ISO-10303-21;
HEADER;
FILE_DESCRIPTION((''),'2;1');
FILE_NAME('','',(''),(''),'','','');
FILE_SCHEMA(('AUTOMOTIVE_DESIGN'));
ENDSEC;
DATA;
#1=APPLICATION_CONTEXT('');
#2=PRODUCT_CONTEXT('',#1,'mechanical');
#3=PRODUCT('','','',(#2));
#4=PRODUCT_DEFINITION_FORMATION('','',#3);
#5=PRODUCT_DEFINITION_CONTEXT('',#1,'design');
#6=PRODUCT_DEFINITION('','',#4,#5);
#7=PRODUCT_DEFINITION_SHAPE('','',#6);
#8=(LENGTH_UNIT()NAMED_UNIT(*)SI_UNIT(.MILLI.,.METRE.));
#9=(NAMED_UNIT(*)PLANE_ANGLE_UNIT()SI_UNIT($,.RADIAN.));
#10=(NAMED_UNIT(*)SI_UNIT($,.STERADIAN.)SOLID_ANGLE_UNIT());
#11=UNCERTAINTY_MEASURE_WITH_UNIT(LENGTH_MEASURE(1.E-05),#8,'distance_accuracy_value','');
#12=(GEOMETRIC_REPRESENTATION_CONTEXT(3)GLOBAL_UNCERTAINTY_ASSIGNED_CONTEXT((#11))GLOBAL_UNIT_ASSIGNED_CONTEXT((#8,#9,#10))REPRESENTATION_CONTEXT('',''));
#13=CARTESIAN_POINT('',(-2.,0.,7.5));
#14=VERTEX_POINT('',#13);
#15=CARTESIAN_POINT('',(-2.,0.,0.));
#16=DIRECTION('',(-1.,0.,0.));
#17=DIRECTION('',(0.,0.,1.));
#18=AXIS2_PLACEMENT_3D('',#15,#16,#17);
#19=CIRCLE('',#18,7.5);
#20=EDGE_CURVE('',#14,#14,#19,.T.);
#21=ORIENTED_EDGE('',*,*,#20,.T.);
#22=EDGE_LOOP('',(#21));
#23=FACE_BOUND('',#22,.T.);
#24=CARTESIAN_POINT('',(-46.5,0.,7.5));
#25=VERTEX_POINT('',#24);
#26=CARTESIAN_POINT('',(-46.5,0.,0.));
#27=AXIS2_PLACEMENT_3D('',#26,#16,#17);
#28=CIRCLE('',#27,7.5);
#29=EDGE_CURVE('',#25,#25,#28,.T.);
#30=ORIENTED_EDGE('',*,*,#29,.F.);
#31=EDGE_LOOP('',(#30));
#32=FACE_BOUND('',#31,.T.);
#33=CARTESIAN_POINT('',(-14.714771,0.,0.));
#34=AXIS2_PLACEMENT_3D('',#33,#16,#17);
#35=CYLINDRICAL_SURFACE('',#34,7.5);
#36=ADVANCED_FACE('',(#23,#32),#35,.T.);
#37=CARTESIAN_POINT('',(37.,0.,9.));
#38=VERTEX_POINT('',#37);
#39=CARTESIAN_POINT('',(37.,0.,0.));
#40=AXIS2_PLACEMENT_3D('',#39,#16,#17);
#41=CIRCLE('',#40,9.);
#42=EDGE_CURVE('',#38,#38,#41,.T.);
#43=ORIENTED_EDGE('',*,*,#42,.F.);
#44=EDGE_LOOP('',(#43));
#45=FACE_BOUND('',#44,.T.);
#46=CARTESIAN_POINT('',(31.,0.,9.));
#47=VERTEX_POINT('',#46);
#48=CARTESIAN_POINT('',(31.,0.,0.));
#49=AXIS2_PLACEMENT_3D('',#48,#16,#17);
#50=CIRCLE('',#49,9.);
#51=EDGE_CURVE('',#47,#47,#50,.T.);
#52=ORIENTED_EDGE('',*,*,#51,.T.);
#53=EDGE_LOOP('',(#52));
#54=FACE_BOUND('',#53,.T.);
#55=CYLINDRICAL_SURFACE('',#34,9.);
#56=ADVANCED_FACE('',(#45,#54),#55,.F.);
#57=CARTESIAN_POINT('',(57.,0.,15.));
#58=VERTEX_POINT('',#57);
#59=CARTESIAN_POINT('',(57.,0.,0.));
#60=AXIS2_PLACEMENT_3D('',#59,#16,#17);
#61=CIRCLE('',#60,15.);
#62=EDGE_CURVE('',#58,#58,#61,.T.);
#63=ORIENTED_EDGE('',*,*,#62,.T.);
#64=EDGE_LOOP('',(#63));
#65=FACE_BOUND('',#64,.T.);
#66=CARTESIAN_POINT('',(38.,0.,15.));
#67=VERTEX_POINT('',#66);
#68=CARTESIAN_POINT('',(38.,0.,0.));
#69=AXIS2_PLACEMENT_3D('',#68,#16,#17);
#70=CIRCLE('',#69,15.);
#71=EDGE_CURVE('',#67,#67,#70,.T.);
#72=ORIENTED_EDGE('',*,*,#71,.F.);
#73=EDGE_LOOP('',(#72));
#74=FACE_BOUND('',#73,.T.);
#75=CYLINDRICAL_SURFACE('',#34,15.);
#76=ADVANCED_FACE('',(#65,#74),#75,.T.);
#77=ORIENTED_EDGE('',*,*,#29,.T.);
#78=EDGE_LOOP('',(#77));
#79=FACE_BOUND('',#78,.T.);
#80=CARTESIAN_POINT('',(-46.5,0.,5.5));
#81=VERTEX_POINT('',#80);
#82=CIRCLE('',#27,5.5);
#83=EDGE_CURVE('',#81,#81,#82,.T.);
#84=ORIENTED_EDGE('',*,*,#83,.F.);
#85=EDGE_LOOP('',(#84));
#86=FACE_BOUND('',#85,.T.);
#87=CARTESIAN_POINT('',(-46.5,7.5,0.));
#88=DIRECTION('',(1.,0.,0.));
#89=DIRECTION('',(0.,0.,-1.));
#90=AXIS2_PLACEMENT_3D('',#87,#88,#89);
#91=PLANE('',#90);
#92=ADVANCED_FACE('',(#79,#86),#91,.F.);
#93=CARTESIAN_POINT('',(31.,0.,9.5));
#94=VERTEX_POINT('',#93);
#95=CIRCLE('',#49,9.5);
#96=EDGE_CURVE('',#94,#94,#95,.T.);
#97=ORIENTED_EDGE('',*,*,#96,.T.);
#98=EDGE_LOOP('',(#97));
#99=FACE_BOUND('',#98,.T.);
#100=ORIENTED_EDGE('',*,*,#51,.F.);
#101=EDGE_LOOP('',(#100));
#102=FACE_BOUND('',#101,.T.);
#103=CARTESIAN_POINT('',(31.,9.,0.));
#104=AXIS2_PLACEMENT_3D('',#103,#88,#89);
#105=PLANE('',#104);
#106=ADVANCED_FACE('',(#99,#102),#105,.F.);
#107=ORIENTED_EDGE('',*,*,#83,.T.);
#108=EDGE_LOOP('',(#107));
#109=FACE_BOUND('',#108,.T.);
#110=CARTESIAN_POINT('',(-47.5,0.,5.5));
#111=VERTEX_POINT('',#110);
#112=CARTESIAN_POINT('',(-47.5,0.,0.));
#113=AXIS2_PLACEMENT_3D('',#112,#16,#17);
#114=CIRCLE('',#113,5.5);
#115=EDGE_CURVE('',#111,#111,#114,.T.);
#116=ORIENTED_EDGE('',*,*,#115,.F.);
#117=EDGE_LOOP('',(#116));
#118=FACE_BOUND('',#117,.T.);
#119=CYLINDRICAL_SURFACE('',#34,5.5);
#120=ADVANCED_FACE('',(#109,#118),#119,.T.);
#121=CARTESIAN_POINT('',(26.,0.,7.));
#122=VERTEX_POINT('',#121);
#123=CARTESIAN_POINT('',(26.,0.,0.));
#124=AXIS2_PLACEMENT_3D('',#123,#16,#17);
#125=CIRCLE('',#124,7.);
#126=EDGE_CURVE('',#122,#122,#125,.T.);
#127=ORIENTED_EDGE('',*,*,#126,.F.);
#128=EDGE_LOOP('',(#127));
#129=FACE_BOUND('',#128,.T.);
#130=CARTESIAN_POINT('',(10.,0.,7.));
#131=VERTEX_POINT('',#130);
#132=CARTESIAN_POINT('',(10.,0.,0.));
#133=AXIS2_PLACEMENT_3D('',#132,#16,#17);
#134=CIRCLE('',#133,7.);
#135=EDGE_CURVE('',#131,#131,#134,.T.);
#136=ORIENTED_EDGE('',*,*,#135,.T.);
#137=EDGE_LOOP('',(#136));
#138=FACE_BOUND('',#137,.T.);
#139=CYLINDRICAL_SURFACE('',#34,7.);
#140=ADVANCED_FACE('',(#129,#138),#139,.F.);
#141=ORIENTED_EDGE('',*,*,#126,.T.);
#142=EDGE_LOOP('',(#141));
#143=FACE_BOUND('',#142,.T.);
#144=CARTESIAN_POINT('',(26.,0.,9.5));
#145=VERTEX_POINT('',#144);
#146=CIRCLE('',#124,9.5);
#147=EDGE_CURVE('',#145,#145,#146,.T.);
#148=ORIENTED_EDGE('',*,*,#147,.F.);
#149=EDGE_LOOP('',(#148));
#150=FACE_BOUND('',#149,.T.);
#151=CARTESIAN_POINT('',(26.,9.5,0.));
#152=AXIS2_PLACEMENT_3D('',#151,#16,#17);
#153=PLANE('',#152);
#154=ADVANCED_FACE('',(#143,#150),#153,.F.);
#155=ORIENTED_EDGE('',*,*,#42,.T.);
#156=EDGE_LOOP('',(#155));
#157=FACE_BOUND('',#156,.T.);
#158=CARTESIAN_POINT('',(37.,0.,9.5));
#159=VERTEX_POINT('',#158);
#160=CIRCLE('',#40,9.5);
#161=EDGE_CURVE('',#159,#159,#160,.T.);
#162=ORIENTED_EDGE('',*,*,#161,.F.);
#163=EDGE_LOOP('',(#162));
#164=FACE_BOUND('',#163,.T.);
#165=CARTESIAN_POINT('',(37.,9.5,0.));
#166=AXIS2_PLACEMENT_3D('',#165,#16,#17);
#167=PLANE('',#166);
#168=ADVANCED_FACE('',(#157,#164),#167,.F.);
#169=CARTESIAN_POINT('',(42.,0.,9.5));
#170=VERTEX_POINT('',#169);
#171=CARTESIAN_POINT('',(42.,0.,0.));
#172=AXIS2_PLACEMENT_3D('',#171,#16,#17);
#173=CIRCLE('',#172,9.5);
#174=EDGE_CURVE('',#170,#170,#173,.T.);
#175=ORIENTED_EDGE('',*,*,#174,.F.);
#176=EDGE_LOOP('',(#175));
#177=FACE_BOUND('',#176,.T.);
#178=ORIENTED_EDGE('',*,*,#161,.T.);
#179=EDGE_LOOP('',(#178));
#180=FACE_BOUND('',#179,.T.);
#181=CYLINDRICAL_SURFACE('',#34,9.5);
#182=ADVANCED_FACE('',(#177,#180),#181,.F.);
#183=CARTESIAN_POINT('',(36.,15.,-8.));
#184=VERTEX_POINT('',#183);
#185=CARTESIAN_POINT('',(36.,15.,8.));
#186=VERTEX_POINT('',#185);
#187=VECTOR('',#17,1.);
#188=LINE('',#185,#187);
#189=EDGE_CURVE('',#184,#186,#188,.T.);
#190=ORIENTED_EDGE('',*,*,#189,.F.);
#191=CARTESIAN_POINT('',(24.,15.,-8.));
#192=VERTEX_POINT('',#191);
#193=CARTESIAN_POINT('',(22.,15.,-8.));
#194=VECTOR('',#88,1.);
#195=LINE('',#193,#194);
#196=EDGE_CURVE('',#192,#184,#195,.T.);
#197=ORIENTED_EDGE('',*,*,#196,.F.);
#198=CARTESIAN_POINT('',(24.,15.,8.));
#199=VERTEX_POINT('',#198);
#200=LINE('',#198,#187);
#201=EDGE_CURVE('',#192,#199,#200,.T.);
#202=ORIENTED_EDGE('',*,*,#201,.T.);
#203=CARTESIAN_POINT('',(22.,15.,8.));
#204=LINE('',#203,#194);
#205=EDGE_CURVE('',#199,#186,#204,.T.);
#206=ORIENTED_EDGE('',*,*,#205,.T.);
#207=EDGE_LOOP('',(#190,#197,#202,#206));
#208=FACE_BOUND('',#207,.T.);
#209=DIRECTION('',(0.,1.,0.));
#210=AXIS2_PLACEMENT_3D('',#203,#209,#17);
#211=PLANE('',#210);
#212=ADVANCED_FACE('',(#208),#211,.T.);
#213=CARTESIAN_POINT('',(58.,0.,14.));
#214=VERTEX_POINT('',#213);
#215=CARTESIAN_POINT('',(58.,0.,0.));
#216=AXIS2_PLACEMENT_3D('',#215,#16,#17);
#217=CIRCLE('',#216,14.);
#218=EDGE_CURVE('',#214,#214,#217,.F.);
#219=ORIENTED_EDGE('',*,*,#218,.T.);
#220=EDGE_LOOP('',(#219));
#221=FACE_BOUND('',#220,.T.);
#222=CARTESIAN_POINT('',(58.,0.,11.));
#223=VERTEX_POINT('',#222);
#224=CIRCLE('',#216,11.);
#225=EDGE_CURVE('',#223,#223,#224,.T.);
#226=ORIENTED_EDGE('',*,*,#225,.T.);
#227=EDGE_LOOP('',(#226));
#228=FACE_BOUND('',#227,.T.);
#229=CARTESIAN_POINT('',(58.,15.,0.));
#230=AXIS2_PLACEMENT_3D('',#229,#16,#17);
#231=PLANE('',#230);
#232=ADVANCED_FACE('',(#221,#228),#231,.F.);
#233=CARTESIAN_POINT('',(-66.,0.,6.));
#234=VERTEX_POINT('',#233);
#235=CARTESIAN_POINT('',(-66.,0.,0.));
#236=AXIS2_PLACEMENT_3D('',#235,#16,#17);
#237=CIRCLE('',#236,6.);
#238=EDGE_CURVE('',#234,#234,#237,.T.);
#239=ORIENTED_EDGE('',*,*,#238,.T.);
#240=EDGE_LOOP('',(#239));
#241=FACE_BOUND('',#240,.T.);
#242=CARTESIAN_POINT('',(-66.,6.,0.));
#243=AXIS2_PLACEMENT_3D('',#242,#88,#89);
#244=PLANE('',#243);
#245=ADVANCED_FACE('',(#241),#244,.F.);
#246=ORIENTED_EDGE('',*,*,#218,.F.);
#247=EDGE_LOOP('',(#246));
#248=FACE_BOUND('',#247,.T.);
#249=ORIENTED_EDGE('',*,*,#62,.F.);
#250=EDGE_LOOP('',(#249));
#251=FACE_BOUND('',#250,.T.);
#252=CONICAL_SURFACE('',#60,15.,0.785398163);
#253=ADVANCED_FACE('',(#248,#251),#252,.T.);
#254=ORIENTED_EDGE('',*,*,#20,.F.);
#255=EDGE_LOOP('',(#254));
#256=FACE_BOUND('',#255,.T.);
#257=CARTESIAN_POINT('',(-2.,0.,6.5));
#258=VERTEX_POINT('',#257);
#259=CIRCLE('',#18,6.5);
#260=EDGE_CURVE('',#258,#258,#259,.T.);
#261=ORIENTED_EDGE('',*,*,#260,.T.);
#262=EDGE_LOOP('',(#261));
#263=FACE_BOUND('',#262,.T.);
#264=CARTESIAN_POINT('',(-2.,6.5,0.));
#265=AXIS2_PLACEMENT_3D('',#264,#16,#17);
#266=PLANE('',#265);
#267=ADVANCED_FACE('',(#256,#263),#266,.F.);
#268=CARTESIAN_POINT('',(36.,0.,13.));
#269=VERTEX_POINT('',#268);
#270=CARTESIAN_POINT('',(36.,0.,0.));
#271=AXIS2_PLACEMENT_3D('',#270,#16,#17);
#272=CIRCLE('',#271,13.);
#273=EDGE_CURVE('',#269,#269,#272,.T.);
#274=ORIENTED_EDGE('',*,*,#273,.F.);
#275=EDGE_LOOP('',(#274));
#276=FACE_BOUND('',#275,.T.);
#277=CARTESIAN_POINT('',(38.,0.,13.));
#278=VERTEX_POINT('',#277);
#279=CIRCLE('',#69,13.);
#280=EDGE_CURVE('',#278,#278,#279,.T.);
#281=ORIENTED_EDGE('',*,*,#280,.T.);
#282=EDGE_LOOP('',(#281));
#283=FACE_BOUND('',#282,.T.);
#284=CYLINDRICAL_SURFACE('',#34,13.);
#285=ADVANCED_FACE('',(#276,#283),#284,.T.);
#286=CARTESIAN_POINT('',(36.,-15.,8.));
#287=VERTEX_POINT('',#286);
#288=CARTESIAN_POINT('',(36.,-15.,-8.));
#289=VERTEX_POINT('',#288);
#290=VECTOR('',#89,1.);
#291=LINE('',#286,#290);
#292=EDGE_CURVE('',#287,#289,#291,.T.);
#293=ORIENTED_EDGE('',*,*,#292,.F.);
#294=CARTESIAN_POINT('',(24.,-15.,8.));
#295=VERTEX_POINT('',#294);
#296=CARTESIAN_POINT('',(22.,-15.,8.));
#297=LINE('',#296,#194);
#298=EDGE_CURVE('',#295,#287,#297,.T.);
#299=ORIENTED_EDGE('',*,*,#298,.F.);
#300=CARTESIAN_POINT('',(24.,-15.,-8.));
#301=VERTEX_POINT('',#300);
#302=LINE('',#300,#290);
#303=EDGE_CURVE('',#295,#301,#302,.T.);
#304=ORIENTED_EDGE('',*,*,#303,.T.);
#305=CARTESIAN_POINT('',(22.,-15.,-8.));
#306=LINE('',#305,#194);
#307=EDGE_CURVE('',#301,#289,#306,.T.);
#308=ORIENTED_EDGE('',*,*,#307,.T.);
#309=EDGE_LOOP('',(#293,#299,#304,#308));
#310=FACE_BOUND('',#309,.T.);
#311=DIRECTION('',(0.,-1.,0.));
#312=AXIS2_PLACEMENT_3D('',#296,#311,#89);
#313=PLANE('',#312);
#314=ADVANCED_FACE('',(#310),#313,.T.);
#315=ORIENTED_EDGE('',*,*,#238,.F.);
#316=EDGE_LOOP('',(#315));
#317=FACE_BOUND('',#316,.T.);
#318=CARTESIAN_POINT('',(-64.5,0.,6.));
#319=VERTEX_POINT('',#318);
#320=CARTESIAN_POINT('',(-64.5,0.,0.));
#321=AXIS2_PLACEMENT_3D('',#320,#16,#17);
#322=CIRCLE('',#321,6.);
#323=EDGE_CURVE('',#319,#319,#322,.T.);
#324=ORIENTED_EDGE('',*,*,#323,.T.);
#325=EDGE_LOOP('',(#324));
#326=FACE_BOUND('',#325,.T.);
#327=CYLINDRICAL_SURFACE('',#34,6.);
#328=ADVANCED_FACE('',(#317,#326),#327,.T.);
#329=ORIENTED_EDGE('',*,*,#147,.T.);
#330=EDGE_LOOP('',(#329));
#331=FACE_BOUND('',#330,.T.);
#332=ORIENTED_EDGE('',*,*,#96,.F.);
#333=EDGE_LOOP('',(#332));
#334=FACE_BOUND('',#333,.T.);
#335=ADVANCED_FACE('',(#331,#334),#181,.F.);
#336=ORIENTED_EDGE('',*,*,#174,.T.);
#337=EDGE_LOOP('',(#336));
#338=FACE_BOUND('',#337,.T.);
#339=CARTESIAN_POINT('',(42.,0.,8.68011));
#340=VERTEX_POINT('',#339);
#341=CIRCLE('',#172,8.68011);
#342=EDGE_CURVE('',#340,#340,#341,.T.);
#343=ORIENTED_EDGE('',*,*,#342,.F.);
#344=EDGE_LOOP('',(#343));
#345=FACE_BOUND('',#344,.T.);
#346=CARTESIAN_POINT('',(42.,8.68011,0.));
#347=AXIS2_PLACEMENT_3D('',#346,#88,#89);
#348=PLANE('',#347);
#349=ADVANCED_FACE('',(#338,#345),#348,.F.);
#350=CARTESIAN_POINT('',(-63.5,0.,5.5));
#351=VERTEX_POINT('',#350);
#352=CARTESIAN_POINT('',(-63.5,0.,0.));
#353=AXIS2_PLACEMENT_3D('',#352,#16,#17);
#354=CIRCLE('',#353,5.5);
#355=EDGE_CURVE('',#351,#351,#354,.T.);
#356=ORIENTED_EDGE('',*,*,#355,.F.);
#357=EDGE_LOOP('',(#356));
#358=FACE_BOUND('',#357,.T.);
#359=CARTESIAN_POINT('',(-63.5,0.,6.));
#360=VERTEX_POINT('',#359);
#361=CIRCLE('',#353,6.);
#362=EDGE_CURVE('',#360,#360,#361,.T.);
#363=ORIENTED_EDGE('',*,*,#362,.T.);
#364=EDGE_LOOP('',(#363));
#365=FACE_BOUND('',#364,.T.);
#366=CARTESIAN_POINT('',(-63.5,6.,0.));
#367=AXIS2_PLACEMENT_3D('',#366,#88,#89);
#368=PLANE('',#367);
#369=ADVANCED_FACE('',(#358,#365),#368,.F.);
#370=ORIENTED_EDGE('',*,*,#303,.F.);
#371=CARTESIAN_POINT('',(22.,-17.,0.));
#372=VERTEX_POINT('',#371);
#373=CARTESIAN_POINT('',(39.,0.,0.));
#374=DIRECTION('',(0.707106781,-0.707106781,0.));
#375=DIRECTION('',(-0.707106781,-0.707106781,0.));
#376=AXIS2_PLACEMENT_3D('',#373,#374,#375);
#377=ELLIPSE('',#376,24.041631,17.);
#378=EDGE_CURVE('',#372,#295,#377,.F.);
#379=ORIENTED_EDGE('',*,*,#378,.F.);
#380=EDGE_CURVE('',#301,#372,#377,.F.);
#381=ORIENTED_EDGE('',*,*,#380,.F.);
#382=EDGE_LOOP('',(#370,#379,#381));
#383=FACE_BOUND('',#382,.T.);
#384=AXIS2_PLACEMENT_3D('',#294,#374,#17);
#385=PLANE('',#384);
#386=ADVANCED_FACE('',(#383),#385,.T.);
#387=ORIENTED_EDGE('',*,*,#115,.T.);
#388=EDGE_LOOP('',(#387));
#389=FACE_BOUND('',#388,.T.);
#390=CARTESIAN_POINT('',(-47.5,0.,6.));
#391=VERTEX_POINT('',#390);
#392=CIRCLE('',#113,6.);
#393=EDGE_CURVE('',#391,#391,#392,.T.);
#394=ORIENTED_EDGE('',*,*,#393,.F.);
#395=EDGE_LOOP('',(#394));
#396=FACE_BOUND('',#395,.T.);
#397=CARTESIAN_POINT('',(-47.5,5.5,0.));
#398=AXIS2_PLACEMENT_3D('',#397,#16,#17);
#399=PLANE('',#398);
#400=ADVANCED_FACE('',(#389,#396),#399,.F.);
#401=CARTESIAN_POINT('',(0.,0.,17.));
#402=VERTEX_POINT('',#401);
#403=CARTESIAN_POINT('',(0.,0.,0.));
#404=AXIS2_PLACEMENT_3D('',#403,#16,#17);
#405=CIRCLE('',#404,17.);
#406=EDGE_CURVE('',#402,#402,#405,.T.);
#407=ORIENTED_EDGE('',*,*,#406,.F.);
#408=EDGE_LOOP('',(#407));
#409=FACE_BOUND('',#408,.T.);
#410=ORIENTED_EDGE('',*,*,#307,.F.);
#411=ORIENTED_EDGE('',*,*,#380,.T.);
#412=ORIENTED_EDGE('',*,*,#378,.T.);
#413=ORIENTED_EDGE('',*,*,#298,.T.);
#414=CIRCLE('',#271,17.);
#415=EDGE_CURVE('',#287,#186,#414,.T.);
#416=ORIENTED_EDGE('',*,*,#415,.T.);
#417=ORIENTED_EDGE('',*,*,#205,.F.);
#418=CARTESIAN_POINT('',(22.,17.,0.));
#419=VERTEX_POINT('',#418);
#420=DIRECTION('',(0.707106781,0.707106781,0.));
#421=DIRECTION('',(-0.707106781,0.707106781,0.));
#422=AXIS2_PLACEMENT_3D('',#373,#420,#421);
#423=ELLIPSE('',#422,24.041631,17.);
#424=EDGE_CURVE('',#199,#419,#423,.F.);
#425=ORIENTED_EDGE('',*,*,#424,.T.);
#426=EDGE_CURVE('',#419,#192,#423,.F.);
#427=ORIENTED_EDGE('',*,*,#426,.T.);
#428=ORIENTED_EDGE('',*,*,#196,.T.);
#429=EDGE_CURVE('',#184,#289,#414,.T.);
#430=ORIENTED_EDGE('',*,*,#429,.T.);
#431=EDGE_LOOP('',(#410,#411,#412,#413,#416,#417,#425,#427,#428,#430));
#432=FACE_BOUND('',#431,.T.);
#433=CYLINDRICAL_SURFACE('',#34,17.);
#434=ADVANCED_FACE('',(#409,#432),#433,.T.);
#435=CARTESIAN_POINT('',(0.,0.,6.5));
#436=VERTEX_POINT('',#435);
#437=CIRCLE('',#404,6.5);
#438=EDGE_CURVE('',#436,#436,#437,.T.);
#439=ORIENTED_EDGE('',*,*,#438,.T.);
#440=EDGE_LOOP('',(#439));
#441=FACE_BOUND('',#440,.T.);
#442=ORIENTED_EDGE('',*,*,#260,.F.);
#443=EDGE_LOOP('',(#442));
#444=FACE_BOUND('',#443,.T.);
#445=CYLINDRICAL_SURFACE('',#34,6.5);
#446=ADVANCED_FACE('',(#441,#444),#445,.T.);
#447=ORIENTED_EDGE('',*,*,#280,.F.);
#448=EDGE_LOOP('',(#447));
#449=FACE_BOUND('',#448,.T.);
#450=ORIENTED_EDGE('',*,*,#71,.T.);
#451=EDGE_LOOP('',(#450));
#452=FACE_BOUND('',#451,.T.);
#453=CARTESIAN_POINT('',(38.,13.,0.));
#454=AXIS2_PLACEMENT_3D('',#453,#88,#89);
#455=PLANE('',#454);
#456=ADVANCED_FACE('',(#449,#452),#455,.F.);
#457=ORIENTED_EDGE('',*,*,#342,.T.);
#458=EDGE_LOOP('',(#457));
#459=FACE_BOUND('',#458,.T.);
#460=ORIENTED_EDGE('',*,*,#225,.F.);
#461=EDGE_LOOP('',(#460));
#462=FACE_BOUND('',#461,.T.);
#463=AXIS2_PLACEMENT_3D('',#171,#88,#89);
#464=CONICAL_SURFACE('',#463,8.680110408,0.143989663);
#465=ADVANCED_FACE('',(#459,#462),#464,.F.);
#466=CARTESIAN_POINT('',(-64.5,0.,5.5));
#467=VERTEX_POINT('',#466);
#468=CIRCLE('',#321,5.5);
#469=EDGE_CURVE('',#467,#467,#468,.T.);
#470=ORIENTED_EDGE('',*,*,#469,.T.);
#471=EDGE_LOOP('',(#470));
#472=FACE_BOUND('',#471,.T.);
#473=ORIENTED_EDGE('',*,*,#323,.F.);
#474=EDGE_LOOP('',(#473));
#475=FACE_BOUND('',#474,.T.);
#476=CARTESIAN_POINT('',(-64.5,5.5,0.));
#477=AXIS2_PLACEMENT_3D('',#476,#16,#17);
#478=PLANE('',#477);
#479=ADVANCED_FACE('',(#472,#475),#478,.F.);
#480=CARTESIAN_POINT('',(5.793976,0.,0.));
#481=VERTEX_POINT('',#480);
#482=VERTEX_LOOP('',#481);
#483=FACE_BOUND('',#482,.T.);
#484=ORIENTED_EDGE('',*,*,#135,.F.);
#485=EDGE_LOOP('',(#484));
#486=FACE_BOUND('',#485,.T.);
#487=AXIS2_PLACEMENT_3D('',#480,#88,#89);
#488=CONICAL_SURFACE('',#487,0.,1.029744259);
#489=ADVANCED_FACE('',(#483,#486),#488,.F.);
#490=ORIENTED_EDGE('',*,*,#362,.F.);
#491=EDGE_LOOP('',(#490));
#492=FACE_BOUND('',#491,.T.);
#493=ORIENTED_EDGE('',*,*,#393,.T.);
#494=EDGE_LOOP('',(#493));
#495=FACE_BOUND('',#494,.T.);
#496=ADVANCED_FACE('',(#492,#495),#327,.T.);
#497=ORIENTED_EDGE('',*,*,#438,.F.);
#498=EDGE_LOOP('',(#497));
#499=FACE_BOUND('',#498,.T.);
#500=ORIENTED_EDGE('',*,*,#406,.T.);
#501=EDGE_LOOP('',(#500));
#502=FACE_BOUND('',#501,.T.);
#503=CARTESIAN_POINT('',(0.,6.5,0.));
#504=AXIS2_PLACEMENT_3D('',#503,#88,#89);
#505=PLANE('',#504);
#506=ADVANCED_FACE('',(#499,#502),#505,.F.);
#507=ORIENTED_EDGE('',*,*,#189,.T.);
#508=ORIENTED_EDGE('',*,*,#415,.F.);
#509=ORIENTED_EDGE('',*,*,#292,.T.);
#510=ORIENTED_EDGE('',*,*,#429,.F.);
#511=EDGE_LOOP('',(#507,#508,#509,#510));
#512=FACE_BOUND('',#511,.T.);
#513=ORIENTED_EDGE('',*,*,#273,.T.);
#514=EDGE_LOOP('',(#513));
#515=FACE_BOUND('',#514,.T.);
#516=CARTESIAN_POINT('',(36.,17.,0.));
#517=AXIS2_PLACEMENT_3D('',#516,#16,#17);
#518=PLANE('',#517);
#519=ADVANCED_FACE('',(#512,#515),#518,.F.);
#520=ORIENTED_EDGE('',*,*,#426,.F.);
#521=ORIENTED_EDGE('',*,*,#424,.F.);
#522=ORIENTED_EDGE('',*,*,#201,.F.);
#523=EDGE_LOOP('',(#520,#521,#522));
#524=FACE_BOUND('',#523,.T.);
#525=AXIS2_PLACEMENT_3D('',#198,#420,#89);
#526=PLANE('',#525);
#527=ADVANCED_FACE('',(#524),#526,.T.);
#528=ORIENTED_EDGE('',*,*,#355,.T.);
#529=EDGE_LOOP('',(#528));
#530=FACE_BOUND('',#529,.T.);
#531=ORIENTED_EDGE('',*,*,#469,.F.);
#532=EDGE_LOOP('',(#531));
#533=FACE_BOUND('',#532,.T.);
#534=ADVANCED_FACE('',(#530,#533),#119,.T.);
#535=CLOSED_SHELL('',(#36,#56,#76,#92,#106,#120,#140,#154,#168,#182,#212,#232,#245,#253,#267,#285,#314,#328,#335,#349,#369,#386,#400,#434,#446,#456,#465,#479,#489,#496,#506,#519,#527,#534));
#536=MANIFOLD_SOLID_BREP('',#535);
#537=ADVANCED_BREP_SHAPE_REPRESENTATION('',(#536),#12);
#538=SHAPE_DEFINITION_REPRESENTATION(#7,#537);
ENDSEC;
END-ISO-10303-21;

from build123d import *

# Parameters (mm, degrees)
SKETCH_4_OUTSIDE_W  = 62.6
SKETCH_4_OUTSIDE_H  = 62.6
CUT_EXTRUDE_2_DEPTH = 14
CHAMFER_1_SIZE      = 2
CHAMFER_2_SIZE      = 1


with BuildPart() as part:
    # 草图1 → 旋转1 (revolve)
    with BuildSketch(Plane.XY, mode=Mode.PRIVATE) as revolve_1_sk:
        Polygon((0, 6.5), (0, 17), (36, 17), (36, 13), (38, 13), (38, 15), (58, 15), (58, 11), (42, 8.680110408), (42, 9.5), (37, 9.5), (37, 9), (31, 9), (31, 9.5), (26, 9.5), (26, 7), (10, 7), (5.793975667, 0), (-66, 0), (-66, 6), (-64.5, 6), (-64.5, 5.5), (-63.5, 5.5), (-63.5, 6), (-47.5, 6), (-47.5, 5.5), (-46.5, 5.5), (-46.5, 7.5), (-2, 7.5), (-2, 6.5), align=None)
    revolve(revolve_1_sk.sketch.rotate(Axis((-14.714771185, 0, 0), (1, 0, 0)), 90), axis=Axis((-14.714771185, 0, 0), (1, 0, 0)))

    # 草图4 outside → 切除-拉伸2 (cut)
    with BuildSketch(Plane(origin=(36, 0, 0), x_dir=(0, 0, -1), z_dir=(1, 0, 0))):
        Rectangle(SKETCH_4_OUTSIDE_W, SKETCH_4_OUTSIDE_H)
        with BuildLine():
            Line((-8, -15), (8, -15))
            ThreePointArc((8, -15), (17, 0), (8, 15))
            Line((8, 15), (-8, 15))
            ThreePointArc((-8, 15), (-17, 0), (-8, -15))
        make_face(mode=Mode.SUBTRACT)
    extrude(amount=-CUT_EXTRUDE_2_DEPTH, mode=Mode.SUBTRACT)

    # 倒角1
    chamfer_1_edges = [part.edges().sort_by_distance(p)[0] for p in [
        (22, -15, 0),
        (22, 15, 0),
    ]]
    chamfer(chamfer_1_edges, length=CHAMFER_1_SIZE - 0.0001)  # a hair under: the kernel refuses the full size

    # 倒角2
    chamfer_2_edges = [part.edges().sort_by_distance(p)[0] for p in [
        (58, 0, -15),
    ]]
    chamfer(chamfer_2_edges, length=CHAMFER_2_SIZE)


solid = part.part
